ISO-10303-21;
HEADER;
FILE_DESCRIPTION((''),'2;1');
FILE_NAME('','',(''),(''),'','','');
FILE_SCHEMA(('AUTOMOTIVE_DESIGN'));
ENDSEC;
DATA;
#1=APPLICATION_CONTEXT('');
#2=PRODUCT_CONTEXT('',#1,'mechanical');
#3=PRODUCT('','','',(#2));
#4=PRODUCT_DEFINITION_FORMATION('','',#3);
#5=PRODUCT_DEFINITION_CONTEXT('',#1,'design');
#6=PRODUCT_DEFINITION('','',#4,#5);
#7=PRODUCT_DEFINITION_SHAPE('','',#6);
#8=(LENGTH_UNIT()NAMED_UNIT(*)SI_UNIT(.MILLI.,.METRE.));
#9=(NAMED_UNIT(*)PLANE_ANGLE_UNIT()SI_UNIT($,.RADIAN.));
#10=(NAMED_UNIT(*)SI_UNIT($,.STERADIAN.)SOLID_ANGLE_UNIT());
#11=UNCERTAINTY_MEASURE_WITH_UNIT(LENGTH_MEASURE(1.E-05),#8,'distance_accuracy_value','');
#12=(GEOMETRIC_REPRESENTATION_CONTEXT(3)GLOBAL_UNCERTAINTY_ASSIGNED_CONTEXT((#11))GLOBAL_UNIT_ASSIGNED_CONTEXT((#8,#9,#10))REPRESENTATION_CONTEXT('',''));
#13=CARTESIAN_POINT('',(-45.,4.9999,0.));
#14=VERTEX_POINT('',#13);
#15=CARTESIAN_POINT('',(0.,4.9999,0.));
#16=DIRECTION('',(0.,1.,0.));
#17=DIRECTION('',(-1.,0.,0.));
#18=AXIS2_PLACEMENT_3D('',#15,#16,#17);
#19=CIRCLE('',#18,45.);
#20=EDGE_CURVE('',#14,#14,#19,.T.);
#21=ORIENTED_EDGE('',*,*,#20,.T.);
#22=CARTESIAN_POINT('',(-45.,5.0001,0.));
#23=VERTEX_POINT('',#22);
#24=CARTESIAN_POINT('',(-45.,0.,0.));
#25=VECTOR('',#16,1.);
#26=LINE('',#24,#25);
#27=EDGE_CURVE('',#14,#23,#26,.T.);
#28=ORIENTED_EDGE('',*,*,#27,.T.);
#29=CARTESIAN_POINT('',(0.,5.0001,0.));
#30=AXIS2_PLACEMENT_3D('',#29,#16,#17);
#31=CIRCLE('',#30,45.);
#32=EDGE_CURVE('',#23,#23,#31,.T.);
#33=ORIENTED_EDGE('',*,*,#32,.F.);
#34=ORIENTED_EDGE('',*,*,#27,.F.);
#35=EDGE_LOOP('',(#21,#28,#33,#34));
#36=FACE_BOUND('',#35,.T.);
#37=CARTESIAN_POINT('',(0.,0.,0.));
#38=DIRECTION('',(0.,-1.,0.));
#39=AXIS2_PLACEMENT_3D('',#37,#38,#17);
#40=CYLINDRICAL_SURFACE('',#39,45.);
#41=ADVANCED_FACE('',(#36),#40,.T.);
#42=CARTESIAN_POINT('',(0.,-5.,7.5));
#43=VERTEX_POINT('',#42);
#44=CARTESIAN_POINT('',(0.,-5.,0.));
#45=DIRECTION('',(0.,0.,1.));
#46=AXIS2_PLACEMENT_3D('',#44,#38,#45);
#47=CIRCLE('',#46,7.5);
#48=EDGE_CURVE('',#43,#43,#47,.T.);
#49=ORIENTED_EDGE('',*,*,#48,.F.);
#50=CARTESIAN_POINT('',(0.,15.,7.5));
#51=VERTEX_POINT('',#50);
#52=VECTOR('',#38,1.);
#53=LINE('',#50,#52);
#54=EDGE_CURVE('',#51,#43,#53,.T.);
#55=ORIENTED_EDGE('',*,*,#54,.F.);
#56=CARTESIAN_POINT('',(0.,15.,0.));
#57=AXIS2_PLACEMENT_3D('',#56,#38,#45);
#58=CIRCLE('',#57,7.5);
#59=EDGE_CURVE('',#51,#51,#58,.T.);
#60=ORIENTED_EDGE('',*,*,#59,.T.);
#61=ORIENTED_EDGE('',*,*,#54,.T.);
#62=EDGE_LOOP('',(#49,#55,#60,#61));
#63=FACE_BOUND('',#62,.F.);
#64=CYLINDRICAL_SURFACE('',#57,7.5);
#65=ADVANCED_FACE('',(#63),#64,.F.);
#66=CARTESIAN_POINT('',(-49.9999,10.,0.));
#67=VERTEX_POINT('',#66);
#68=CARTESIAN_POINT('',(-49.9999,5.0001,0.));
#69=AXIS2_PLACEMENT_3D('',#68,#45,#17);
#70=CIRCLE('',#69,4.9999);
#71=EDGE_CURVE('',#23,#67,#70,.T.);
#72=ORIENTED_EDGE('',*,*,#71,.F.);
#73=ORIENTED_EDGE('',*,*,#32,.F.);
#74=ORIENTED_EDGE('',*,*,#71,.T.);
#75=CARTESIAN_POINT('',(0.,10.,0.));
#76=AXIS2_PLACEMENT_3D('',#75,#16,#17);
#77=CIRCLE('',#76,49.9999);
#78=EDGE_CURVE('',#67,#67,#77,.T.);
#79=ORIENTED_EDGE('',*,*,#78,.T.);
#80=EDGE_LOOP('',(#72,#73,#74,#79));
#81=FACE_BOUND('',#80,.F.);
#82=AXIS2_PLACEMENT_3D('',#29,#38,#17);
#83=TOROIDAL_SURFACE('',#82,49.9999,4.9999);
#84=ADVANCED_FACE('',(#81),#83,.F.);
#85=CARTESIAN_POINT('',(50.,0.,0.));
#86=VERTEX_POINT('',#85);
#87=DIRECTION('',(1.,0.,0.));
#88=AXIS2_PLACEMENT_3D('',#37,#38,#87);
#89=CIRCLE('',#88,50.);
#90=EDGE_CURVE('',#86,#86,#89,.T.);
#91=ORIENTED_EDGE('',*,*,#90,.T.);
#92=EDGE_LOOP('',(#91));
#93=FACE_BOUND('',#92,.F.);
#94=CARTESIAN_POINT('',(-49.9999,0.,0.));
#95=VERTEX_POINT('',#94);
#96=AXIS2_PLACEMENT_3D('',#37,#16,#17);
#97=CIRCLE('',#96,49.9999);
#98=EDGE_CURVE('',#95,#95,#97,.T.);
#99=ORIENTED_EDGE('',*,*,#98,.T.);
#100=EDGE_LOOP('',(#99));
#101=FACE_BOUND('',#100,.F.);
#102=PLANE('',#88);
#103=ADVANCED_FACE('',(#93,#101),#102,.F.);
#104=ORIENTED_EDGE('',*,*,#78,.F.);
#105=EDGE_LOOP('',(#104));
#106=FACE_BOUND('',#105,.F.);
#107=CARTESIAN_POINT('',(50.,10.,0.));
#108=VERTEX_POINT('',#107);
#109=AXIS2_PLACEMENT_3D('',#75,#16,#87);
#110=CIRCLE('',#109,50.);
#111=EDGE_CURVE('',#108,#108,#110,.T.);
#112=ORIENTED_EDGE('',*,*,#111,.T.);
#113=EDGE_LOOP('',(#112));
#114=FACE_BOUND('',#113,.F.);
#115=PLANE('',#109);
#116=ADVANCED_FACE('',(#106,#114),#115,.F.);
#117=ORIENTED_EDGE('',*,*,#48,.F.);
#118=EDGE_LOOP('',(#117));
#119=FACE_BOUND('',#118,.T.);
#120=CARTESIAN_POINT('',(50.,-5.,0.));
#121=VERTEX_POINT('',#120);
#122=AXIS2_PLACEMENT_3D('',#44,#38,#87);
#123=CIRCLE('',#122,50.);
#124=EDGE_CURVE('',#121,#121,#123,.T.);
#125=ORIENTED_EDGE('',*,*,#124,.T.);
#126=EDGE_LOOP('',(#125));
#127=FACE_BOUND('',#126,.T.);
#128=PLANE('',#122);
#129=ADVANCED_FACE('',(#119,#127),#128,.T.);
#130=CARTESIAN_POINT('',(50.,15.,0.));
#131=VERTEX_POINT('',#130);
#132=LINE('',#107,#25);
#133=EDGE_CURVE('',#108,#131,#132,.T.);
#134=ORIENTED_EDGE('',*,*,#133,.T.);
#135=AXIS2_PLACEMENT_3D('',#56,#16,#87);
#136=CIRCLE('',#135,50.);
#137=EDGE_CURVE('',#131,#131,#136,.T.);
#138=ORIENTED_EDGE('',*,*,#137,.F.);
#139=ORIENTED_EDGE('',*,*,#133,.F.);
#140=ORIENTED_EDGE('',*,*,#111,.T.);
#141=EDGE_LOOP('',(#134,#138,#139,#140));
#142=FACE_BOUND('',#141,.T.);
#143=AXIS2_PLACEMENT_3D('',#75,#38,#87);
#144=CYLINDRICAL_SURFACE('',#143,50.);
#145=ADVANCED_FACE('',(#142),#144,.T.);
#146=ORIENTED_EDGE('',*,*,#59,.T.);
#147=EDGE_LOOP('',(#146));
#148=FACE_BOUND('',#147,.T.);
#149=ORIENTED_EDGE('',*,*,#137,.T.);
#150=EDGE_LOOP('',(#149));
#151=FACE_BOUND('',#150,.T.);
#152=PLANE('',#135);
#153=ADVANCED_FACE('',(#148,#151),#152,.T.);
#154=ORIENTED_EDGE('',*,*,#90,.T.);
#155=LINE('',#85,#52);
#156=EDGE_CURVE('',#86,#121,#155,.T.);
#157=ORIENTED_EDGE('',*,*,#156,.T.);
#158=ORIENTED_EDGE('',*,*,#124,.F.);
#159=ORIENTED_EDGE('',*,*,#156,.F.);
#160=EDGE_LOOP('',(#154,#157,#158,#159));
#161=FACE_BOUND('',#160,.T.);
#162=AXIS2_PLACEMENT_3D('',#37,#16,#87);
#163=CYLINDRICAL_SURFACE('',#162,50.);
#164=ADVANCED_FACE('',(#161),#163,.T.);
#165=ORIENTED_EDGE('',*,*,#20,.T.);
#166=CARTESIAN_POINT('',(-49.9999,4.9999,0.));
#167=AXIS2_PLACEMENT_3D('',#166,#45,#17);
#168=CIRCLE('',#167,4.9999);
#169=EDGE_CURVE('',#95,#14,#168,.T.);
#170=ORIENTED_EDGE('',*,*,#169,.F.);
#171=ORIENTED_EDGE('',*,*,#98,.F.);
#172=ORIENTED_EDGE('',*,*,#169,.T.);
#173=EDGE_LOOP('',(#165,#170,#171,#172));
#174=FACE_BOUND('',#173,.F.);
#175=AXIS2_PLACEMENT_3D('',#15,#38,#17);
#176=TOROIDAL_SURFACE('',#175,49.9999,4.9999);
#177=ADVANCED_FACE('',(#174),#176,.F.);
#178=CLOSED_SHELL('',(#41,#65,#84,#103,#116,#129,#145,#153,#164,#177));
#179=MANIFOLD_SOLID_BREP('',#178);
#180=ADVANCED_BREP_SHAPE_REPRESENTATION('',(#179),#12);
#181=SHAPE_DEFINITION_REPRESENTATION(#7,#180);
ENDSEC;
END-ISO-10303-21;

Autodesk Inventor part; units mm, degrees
ref_plane "YZ Plane" through (0, 0, 0) normal (1, 0, 0) x (0, 1, 0)
ref_plane "XZ Plane" through (0, 0, 0) normal (0, 1, 0) x (-1, 0, 0)
ref_plane "XY Plane" through (0, 0, 0) normal (0, 0, 1) x (1, 0, 0)
sketch "Sketch1" plane through (0, 0, 0) normal (0, 1, 0) x (-1, 0, 0)
  circle A0 centre (0, 0) radius 45
  dimension "d0" = 90
extrude "Extrusion1" add sketch "Sketch1" along normal blind 10
sketch "Sketch3" plane through (0, 10, 0) normal (0, 1, 0) x (1, 0, 0)
  circle A0 centre (0, 0) radius 50
  dimension "d5" = 100
extrude "Extrusion2" add sketch "Sketch3" along normal blind 5
sketch "Sketch4" plane through (0, 0, 0) normal (0, -1, 0) x (1, 0, 0)
  circle A0 centre (0, 0) radius 50
  dimension "d8" = 100
extrude "Extrusion3" add sketch "Sketch4" along normal blind 5
full round fillet "Full Round Fillet1" first side at (0, 0, -46.5023) centre faces at (-7.8142, 6.6667, -44.3163) second side at (0, 10, -46.5023)
sketch "Sketch5" plane through (0, 15, 0) normal (0, 1, 0) x (1, 0, 0)
  point P0 (0, 0)
  point P1 (0, 0)
hole "Hole1" at (0, 15, 0) at (0, 15, 0) direction (0, -1, 0) diameter 15 end through all
thread "Thread1" size "M15x1.5" class "6H" standard "ANSI Metric M Profile" length 51.6
properties part number "pump rotor"
